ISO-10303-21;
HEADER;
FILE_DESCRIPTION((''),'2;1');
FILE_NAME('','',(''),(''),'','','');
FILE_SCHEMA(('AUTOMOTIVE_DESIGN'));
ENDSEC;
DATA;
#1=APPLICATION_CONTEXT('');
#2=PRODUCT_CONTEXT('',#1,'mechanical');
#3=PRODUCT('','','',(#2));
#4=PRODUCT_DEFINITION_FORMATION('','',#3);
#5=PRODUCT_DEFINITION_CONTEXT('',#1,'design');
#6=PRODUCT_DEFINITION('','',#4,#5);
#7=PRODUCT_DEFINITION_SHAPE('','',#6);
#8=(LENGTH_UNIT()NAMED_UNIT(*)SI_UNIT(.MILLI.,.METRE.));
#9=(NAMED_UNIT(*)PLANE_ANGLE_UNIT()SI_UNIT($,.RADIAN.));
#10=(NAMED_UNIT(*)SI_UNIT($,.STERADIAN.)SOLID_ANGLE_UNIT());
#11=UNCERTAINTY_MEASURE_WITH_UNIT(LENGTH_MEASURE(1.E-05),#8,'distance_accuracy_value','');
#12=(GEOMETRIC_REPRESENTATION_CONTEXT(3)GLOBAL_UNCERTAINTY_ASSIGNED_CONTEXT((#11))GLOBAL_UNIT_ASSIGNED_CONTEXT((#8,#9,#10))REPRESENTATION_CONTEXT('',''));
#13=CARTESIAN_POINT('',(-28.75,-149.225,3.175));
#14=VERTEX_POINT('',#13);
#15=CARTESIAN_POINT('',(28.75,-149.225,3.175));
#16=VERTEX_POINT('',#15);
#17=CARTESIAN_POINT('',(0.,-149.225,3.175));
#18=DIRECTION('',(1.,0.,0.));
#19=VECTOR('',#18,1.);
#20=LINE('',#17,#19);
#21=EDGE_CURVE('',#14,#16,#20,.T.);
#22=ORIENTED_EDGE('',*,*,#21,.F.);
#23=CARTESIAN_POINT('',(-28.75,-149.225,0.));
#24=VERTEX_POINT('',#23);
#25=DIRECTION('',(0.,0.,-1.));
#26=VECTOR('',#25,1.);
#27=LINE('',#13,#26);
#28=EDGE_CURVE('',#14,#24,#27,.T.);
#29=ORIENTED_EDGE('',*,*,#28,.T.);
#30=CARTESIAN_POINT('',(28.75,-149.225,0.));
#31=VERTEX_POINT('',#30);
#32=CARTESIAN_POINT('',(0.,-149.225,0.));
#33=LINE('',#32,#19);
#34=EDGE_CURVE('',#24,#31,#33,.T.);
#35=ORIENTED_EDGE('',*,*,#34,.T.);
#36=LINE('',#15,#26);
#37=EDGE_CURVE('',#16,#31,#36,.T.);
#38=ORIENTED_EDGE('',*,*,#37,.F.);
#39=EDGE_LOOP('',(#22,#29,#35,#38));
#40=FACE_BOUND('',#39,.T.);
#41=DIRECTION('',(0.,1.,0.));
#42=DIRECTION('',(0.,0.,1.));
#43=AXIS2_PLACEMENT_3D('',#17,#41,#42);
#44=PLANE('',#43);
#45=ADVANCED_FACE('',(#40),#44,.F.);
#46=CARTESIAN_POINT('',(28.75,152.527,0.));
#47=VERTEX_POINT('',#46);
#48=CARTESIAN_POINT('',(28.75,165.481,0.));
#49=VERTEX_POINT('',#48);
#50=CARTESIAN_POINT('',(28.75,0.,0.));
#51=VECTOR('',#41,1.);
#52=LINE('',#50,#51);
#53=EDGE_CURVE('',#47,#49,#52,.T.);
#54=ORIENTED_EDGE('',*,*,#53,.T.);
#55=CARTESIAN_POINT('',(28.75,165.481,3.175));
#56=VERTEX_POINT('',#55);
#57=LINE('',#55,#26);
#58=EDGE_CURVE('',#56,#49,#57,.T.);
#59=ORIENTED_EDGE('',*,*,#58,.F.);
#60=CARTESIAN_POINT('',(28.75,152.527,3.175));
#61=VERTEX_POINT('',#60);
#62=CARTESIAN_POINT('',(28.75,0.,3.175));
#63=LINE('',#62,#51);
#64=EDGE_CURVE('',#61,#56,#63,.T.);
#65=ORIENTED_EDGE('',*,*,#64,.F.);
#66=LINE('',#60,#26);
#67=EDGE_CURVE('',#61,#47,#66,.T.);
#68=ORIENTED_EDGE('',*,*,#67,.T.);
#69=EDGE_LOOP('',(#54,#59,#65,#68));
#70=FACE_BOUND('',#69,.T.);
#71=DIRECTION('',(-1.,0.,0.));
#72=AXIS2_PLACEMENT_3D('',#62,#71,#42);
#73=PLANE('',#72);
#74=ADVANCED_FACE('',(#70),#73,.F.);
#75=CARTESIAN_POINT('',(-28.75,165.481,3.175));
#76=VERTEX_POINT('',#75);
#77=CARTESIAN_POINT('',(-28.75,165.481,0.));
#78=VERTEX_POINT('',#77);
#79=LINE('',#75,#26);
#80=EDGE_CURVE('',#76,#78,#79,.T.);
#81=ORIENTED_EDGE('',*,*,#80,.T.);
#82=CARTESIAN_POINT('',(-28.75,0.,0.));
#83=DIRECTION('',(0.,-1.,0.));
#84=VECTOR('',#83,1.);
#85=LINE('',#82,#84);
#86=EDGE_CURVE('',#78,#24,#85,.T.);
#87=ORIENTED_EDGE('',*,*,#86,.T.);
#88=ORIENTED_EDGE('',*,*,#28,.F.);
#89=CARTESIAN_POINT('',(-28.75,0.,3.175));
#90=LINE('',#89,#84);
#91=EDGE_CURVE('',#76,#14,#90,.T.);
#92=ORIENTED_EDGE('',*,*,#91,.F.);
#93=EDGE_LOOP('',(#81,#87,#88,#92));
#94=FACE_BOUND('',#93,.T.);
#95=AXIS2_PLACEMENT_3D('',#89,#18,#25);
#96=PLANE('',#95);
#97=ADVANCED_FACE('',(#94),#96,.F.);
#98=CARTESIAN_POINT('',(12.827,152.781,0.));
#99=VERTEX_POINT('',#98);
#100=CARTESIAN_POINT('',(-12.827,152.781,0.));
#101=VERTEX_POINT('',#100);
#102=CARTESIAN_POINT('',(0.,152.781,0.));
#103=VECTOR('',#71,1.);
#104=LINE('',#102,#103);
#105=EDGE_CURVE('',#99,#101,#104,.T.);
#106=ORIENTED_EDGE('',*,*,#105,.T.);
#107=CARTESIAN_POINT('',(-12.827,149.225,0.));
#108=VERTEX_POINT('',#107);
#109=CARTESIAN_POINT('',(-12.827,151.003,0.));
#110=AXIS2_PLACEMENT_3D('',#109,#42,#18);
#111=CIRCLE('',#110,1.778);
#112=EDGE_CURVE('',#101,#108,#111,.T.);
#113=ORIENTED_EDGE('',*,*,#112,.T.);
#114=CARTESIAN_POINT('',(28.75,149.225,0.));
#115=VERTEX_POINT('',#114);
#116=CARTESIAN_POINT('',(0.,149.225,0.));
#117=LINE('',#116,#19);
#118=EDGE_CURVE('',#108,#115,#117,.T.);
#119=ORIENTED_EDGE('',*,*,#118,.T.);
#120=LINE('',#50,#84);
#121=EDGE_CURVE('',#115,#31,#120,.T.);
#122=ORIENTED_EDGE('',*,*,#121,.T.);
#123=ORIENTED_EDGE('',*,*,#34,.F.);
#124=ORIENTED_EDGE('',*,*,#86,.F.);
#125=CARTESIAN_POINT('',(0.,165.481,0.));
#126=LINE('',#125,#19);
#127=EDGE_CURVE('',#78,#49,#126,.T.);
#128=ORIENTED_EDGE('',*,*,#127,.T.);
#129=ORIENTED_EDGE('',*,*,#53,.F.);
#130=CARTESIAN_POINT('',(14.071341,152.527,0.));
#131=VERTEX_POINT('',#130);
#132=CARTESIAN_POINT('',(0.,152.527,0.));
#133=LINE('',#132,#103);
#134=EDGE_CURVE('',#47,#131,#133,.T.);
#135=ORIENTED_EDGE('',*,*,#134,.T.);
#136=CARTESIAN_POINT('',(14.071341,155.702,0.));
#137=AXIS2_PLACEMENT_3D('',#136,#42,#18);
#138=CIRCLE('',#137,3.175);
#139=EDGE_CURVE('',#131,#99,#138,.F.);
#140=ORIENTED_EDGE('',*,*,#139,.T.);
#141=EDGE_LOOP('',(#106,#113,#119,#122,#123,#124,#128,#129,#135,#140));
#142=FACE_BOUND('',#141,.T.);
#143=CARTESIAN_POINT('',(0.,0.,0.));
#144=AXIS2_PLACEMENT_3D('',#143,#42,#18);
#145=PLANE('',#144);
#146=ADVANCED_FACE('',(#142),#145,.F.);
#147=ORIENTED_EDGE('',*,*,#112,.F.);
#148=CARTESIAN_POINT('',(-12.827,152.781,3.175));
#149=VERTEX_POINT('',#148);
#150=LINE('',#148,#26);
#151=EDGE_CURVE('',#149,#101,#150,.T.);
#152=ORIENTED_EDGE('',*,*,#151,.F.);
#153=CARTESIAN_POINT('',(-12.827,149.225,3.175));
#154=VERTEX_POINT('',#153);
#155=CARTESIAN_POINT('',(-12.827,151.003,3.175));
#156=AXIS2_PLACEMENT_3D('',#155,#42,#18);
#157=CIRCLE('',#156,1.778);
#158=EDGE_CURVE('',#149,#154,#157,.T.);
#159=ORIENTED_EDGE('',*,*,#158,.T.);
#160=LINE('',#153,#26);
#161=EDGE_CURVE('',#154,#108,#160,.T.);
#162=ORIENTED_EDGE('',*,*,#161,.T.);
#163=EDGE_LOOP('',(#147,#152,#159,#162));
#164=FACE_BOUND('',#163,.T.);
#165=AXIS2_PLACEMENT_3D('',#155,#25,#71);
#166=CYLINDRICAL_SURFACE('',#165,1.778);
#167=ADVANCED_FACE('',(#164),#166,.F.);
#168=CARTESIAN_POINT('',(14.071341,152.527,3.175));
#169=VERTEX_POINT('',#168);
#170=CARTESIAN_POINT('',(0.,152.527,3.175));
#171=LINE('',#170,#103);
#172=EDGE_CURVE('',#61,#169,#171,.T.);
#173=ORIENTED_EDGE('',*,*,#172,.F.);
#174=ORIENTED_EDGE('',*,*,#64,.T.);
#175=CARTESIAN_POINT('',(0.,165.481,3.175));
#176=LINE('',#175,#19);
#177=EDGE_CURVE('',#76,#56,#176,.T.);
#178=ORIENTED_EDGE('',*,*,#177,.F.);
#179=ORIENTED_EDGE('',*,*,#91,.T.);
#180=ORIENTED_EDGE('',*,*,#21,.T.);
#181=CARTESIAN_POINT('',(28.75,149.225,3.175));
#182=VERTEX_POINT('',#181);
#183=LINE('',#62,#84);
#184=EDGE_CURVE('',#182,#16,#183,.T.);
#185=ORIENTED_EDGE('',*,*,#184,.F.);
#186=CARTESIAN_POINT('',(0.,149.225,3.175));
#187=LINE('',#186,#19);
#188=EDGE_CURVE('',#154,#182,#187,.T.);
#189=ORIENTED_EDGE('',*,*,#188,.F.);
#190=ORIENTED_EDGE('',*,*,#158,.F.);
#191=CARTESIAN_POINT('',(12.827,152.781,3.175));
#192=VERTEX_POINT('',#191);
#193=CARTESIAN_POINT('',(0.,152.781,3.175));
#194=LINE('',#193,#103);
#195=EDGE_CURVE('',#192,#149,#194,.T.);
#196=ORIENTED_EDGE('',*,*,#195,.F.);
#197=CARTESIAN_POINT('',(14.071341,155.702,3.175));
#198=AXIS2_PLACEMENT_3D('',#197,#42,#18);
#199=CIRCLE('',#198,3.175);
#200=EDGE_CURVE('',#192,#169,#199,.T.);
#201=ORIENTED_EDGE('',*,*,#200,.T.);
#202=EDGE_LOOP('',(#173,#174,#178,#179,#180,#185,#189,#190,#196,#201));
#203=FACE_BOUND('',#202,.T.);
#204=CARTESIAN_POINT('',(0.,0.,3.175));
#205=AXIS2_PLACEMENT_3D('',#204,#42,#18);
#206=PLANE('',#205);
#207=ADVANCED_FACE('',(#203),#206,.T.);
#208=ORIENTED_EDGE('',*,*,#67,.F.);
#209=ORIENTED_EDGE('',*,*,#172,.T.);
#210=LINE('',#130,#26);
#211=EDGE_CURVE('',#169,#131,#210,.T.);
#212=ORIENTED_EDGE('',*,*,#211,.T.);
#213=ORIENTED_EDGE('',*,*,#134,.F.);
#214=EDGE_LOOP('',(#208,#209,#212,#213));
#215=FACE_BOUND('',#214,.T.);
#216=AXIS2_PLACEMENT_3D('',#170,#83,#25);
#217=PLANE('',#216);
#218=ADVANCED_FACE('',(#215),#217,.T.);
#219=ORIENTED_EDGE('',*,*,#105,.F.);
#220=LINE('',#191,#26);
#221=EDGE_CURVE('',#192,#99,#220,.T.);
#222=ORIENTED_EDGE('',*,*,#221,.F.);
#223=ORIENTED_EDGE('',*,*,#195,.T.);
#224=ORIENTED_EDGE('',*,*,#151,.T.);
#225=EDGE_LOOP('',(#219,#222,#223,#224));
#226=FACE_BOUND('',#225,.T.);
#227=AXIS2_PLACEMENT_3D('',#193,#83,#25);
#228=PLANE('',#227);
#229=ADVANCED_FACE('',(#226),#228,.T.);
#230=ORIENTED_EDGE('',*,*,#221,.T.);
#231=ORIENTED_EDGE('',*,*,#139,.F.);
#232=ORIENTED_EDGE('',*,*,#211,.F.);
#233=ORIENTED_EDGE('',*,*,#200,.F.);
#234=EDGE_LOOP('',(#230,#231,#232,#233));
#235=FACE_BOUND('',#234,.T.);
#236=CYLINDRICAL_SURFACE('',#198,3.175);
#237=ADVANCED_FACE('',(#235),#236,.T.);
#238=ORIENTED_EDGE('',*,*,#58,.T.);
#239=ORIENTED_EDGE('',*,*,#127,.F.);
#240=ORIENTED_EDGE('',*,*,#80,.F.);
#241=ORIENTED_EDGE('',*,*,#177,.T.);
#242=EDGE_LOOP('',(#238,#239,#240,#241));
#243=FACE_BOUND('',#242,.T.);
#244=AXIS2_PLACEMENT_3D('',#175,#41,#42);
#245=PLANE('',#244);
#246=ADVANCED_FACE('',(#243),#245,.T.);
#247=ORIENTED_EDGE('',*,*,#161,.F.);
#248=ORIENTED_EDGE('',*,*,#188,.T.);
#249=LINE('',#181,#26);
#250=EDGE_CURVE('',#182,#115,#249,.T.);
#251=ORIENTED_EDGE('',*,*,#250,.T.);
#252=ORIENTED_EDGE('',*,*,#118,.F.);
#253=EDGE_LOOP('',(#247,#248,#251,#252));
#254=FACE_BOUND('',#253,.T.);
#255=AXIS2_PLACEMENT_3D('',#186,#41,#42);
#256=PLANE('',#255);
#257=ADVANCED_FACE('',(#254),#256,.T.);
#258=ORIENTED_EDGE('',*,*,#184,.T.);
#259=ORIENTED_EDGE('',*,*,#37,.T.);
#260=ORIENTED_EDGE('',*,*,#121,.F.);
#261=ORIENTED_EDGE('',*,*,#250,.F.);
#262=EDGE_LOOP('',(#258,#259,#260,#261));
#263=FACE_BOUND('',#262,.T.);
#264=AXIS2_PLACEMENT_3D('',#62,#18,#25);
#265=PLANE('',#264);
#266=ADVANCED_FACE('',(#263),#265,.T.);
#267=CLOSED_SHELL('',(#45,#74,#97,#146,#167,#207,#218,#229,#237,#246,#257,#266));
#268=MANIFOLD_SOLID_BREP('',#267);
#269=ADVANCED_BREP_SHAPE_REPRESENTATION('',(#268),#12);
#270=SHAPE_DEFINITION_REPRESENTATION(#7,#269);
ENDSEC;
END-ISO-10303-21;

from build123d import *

# Parameters (mm, degrees)
BOSS_EXTRUDE1_DEPTH = 3.175
FILLET1_R           = 3.175


with BuildPart() as part:
    # Sketch1 → Boss-Extrude1 (new body)
    with BuildSketch(Plane.XY):
        with BuildLine():
            Line((-28.75, 165.481), (-28.75, 149.225))
            Line((-28.75, 149.225), (-12.827, 149.225))
            ThreePointArc((-12.827, 149.225), (-14.605, 151.003), (-12.827, 152.781))
            Line((-12.827, 152.781), (12.827, 152.781))
            Line((12.827, 152.781), (12.827, 152.527))
            Line((12.827, 152.527), (28.75, 152.527))
            Line((28.75, 152.527), (28.75, 165.481))
            Line((28.75, 165.481), (-28.75, 165.481))
        make_face()
        Polygon((-12.827, 149.225), (-28.75, 149.225), (-28.75, -149.225), (28.75, -149.225), (28.75, 149.225), align=None)
    extrude(amount=BOSS_EXTRUDE1_DEPTH)

    # Fillet1
    # the kernel refuses this fillet: 3.175 mm, written as the material it takes off along each edge
    with BuildSketch(Plane(origin=(12.827, 152.527, -3.110851973), x_dir=(1, 0, 0), z_dir=(0, 0, 1))) as fillet1_piece_1:
        with BuildLine():
            CenterArc((1.244340789, 3.175), FILLET1_R, 246.926081934, 23.073918066)
            Line((0, 0.254), (-0.024886816, 0.19558))
            ThreePointArc((-0.024886816, 0.19558), (-0.0635, 0.127), (-0.0635, 0))
            Line((-0.0635, 0), (0, -0.0635))
            Line((0, -0.0635), (1.244340789, -0.0635))
            Line((1.244340789, -0.0635), (1.244340789, 0))
        make_face()
    extrude(amount=9.396703947, mode=Mode.SUBTRACT)


solid = part.part
